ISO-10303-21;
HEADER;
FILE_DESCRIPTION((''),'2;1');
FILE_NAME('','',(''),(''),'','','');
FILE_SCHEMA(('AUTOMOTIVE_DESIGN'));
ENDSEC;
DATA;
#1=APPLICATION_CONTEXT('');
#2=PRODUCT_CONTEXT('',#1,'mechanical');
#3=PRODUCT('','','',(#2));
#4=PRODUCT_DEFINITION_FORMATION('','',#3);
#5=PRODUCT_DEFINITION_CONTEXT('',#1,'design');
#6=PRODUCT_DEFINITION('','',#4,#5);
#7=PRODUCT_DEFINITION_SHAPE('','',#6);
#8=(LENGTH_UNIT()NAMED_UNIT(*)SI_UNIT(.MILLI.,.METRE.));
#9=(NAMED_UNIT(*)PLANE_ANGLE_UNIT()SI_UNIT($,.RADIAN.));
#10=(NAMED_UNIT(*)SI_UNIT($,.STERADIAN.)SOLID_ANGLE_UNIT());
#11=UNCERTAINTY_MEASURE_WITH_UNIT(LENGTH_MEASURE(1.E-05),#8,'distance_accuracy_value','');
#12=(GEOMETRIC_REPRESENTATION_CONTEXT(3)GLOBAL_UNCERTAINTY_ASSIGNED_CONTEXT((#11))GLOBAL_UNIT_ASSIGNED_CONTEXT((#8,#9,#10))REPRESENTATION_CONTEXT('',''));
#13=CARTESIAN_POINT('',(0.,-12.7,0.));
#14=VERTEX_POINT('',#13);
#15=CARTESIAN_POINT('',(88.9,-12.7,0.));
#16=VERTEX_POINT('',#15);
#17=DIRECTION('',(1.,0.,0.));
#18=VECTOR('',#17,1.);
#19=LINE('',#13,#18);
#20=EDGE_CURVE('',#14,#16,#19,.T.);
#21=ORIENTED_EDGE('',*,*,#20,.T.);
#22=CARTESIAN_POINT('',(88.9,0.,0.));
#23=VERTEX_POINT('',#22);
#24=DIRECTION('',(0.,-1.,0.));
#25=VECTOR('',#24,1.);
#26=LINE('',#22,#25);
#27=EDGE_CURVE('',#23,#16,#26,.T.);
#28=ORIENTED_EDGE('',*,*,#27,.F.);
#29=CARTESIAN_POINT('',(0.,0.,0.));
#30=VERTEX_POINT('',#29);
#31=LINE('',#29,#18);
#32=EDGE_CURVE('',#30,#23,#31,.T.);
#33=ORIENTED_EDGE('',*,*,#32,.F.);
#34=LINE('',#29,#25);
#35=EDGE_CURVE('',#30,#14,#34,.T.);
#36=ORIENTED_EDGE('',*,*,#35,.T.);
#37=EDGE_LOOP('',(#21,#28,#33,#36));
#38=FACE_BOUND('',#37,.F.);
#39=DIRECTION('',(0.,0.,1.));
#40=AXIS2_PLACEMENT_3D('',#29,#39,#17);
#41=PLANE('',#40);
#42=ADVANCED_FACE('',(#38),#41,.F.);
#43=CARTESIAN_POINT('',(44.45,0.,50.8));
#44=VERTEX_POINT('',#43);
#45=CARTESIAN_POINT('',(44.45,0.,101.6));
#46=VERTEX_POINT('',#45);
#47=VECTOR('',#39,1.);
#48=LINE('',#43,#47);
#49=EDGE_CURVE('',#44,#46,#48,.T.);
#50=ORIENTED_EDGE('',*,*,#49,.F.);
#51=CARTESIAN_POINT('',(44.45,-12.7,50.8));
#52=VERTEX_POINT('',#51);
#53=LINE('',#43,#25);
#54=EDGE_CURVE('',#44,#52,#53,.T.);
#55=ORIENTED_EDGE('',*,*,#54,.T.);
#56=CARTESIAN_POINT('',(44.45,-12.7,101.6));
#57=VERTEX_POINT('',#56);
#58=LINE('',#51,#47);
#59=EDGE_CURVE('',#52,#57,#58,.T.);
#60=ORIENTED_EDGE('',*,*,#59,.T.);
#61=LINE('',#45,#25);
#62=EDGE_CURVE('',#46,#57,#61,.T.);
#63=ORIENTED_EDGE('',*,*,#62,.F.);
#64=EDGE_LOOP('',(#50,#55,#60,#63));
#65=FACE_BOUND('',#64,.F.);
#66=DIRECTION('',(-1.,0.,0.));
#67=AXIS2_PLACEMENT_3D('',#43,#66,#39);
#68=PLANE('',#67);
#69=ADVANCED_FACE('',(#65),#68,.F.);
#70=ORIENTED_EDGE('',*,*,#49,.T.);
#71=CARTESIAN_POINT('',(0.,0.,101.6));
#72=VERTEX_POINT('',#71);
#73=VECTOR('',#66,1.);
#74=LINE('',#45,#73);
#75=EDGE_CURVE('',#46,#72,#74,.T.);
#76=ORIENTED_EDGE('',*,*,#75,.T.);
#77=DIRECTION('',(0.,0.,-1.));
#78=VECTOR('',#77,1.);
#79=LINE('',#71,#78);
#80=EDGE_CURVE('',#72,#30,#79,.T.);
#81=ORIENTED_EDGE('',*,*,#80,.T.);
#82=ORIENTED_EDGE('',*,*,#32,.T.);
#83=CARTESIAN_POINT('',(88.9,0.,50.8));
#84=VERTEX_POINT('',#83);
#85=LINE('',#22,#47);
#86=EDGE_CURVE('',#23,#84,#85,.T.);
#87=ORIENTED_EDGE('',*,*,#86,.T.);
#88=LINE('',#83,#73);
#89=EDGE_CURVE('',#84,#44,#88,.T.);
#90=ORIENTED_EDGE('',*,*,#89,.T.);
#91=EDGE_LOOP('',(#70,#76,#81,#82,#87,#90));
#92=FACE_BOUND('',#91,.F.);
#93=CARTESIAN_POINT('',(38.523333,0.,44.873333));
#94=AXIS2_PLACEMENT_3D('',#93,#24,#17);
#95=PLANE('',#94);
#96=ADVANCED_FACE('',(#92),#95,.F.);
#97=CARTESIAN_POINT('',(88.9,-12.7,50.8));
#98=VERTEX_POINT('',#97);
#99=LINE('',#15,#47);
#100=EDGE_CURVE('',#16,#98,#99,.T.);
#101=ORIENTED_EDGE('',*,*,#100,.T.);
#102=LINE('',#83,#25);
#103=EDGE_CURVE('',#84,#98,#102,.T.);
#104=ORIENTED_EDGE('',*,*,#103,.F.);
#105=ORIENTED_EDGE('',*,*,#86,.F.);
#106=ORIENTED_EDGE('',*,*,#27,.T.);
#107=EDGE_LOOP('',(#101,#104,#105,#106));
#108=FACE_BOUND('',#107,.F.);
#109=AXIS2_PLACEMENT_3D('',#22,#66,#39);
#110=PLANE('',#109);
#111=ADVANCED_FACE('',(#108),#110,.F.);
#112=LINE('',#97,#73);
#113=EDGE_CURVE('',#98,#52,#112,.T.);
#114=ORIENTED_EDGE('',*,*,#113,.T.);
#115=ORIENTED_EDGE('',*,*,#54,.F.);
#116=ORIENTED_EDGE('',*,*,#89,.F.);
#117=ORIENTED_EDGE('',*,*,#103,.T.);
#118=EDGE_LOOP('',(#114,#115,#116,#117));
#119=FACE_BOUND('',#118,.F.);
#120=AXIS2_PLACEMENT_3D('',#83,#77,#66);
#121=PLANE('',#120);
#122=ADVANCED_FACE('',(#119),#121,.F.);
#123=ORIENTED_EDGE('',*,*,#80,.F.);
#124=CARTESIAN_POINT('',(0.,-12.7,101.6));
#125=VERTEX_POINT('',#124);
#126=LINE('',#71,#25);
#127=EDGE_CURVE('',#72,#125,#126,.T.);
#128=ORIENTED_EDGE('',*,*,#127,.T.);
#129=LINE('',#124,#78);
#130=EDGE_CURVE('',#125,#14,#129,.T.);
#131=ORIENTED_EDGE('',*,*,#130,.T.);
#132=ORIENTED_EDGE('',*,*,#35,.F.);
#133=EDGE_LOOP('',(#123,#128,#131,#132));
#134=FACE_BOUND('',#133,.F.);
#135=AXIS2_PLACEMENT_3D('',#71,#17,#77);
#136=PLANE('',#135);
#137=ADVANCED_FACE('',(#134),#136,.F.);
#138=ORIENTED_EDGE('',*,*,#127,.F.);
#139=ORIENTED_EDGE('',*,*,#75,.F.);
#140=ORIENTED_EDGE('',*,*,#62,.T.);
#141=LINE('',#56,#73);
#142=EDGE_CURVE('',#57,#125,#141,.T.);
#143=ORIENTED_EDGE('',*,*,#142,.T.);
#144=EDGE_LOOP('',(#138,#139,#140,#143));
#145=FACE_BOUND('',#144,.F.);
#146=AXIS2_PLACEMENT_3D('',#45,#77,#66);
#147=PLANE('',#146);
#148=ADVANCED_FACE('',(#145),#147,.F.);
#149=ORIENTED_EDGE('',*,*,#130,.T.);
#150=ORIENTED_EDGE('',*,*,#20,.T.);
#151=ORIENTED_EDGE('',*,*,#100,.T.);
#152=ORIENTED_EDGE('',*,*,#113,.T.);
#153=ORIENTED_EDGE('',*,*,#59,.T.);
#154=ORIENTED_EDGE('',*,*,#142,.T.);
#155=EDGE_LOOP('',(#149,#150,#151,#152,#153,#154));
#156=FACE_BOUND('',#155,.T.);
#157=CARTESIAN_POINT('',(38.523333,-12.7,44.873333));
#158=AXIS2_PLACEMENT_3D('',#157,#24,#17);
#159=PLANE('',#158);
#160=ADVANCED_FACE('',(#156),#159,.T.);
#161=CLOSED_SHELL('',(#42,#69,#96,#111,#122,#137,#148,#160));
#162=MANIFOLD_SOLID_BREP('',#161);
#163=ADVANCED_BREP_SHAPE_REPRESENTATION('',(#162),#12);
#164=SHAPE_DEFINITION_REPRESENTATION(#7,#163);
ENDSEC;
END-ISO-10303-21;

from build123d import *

# Parameters (mm, degrees)
F1_DEPTH = 12.7


# Not quite as in the source:
# - a length typed as a fraction of an inch, garbled in the dataset ("3 / 203.2 mm" for 3/8 in), is restored


with BuildPart() as f1:
    # F0 (on Front) → F1 (new body)
    with BuildSketch(Plane.XZ):
        Polygon((0, 101.6), (0, 0), (88.9, 0), (88.9, 50.8), (44.45, 50.8), (44.45, 101.6), align=None)
    extrude(amount=F1_DEPTH)


solid = f1.part
